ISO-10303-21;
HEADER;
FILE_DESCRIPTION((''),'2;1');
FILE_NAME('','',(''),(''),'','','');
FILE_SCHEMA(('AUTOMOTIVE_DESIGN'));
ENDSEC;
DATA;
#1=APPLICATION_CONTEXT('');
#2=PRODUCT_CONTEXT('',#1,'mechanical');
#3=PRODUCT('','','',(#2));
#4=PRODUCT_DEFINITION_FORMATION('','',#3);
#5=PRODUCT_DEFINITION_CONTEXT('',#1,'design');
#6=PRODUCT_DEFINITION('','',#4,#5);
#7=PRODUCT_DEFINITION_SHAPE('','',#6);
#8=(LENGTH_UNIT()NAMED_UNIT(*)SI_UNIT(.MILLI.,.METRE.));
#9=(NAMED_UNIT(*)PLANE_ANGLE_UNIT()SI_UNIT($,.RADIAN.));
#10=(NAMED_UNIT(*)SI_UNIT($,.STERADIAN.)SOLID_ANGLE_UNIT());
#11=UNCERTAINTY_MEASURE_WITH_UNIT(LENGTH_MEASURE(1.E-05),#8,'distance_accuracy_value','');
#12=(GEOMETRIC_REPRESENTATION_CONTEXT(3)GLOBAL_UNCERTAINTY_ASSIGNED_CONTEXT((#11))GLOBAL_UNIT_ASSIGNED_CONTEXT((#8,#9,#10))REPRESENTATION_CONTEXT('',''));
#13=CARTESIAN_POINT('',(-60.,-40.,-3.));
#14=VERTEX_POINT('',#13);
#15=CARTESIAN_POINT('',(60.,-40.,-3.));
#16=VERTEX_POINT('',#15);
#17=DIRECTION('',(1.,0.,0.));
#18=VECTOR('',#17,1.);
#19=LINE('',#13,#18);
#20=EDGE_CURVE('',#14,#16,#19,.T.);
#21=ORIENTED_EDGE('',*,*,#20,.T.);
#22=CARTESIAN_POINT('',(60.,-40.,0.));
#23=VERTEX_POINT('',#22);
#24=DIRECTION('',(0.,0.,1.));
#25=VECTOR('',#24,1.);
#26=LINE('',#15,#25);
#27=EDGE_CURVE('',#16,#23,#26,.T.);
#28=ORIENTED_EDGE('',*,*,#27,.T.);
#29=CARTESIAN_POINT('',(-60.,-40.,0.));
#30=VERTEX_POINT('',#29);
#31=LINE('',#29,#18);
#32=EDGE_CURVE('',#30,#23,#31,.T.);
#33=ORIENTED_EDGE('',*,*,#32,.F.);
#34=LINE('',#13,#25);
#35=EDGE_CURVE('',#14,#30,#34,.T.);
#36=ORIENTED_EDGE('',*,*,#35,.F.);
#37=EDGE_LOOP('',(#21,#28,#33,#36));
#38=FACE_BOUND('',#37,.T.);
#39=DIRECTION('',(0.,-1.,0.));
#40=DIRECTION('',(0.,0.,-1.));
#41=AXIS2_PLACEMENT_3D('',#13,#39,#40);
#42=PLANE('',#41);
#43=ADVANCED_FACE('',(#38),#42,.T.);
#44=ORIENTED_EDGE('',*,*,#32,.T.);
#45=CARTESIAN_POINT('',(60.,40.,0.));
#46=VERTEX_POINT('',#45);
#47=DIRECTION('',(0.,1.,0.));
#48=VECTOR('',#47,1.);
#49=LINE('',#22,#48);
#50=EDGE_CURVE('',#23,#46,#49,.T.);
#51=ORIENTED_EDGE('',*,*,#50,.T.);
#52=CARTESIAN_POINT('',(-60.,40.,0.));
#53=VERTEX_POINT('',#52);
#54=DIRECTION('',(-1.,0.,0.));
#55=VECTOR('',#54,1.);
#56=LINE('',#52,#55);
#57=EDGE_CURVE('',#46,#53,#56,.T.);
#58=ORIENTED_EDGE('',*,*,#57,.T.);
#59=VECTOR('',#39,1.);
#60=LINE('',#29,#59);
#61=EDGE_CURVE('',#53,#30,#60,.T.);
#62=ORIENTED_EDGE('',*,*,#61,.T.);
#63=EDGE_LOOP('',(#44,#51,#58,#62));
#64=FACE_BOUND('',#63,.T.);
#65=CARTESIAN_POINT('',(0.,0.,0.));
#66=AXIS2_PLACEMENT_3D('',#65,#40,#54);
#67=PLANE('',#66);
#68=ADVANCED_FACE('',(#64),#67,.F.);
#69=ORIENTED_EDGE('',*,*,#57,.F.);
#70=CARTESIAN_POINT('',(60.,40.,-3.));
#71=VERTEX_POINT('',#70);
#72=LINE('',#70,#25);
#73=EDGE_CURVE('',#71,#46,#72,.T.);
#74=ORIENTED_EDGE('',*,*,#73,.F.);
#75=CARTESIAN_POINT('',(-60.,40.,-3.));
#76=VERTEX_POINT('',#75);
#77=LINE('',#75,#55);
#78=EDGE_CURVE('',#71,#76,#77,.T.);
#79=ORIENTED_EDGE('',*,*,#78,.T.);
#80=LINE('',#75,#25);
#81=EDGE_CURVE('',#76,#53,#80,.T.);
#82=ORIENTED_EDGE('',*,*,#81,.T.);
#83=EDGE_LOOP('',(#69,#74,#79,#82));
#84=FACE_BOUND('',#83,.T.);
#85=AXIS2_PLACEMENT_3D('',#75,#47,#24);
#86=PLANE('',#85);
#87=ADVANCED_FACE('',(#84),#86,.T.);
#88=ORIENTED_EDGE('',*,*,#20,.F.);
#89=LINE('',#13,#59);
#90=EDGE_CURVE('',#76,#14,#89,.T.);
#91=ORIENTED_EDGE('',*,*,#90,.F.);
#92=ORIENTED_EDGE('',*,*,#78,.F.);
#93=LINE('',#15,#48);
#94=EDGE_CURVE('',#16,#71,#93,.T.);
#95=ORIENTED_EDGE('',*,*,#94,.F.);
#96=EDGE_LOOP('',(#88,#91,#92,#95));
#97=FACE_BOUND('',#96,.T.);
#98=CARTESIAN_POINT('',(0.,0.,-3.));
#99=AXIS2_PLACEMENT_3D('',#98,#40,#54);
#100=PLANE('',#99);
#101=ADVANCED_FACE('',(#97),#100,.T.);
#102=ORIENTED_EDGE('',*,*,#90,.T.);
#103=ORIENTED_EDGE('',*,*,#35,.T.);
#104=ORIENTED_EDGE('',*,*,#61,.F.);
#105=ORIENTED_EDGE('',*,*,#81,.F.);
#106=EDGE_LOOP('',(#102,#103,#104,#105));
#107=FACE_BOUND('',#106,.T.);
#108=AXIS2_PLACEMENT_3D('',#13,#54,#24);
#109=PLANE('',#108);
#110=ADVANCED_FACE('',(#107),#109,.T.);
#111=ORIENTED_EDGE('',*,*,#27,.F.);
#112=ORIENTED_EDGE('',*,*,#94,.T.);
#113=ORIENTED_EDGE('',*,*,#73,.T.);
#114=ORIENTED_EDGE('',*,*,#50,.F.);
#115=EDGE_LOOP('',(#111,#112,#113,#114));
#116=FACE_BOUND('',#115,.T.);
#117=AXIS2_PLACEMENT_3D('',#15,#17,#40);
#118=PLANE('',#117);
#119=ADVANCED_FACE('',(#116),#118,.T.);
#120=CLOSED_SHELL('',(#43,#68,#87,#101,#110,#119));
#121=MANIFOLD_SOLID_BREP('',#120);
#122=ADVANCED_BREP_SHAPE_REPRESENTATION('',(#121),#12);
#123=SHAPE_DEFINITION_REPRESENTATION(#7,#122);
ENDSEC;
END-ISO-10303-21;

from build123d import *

# Parameters (mm, degrees)
SKETCH_1_W             = 120
SKETCH_1_H             = 80
SM_BASE_FLANGE_1_DEPTH = 3


# Sheet-metal steps are written as plain solids
with BuildPart() as part:
    # Sketch 1 → Базовая кромка1 (new body)
    with BuildSketch(Plane.XY):
        Rectangle(SKETCH_1_W, SKETCH_1_H)
    extrude(amount=-SM_BASE_FLANGE_1_DEPTH)


solid = part.part
